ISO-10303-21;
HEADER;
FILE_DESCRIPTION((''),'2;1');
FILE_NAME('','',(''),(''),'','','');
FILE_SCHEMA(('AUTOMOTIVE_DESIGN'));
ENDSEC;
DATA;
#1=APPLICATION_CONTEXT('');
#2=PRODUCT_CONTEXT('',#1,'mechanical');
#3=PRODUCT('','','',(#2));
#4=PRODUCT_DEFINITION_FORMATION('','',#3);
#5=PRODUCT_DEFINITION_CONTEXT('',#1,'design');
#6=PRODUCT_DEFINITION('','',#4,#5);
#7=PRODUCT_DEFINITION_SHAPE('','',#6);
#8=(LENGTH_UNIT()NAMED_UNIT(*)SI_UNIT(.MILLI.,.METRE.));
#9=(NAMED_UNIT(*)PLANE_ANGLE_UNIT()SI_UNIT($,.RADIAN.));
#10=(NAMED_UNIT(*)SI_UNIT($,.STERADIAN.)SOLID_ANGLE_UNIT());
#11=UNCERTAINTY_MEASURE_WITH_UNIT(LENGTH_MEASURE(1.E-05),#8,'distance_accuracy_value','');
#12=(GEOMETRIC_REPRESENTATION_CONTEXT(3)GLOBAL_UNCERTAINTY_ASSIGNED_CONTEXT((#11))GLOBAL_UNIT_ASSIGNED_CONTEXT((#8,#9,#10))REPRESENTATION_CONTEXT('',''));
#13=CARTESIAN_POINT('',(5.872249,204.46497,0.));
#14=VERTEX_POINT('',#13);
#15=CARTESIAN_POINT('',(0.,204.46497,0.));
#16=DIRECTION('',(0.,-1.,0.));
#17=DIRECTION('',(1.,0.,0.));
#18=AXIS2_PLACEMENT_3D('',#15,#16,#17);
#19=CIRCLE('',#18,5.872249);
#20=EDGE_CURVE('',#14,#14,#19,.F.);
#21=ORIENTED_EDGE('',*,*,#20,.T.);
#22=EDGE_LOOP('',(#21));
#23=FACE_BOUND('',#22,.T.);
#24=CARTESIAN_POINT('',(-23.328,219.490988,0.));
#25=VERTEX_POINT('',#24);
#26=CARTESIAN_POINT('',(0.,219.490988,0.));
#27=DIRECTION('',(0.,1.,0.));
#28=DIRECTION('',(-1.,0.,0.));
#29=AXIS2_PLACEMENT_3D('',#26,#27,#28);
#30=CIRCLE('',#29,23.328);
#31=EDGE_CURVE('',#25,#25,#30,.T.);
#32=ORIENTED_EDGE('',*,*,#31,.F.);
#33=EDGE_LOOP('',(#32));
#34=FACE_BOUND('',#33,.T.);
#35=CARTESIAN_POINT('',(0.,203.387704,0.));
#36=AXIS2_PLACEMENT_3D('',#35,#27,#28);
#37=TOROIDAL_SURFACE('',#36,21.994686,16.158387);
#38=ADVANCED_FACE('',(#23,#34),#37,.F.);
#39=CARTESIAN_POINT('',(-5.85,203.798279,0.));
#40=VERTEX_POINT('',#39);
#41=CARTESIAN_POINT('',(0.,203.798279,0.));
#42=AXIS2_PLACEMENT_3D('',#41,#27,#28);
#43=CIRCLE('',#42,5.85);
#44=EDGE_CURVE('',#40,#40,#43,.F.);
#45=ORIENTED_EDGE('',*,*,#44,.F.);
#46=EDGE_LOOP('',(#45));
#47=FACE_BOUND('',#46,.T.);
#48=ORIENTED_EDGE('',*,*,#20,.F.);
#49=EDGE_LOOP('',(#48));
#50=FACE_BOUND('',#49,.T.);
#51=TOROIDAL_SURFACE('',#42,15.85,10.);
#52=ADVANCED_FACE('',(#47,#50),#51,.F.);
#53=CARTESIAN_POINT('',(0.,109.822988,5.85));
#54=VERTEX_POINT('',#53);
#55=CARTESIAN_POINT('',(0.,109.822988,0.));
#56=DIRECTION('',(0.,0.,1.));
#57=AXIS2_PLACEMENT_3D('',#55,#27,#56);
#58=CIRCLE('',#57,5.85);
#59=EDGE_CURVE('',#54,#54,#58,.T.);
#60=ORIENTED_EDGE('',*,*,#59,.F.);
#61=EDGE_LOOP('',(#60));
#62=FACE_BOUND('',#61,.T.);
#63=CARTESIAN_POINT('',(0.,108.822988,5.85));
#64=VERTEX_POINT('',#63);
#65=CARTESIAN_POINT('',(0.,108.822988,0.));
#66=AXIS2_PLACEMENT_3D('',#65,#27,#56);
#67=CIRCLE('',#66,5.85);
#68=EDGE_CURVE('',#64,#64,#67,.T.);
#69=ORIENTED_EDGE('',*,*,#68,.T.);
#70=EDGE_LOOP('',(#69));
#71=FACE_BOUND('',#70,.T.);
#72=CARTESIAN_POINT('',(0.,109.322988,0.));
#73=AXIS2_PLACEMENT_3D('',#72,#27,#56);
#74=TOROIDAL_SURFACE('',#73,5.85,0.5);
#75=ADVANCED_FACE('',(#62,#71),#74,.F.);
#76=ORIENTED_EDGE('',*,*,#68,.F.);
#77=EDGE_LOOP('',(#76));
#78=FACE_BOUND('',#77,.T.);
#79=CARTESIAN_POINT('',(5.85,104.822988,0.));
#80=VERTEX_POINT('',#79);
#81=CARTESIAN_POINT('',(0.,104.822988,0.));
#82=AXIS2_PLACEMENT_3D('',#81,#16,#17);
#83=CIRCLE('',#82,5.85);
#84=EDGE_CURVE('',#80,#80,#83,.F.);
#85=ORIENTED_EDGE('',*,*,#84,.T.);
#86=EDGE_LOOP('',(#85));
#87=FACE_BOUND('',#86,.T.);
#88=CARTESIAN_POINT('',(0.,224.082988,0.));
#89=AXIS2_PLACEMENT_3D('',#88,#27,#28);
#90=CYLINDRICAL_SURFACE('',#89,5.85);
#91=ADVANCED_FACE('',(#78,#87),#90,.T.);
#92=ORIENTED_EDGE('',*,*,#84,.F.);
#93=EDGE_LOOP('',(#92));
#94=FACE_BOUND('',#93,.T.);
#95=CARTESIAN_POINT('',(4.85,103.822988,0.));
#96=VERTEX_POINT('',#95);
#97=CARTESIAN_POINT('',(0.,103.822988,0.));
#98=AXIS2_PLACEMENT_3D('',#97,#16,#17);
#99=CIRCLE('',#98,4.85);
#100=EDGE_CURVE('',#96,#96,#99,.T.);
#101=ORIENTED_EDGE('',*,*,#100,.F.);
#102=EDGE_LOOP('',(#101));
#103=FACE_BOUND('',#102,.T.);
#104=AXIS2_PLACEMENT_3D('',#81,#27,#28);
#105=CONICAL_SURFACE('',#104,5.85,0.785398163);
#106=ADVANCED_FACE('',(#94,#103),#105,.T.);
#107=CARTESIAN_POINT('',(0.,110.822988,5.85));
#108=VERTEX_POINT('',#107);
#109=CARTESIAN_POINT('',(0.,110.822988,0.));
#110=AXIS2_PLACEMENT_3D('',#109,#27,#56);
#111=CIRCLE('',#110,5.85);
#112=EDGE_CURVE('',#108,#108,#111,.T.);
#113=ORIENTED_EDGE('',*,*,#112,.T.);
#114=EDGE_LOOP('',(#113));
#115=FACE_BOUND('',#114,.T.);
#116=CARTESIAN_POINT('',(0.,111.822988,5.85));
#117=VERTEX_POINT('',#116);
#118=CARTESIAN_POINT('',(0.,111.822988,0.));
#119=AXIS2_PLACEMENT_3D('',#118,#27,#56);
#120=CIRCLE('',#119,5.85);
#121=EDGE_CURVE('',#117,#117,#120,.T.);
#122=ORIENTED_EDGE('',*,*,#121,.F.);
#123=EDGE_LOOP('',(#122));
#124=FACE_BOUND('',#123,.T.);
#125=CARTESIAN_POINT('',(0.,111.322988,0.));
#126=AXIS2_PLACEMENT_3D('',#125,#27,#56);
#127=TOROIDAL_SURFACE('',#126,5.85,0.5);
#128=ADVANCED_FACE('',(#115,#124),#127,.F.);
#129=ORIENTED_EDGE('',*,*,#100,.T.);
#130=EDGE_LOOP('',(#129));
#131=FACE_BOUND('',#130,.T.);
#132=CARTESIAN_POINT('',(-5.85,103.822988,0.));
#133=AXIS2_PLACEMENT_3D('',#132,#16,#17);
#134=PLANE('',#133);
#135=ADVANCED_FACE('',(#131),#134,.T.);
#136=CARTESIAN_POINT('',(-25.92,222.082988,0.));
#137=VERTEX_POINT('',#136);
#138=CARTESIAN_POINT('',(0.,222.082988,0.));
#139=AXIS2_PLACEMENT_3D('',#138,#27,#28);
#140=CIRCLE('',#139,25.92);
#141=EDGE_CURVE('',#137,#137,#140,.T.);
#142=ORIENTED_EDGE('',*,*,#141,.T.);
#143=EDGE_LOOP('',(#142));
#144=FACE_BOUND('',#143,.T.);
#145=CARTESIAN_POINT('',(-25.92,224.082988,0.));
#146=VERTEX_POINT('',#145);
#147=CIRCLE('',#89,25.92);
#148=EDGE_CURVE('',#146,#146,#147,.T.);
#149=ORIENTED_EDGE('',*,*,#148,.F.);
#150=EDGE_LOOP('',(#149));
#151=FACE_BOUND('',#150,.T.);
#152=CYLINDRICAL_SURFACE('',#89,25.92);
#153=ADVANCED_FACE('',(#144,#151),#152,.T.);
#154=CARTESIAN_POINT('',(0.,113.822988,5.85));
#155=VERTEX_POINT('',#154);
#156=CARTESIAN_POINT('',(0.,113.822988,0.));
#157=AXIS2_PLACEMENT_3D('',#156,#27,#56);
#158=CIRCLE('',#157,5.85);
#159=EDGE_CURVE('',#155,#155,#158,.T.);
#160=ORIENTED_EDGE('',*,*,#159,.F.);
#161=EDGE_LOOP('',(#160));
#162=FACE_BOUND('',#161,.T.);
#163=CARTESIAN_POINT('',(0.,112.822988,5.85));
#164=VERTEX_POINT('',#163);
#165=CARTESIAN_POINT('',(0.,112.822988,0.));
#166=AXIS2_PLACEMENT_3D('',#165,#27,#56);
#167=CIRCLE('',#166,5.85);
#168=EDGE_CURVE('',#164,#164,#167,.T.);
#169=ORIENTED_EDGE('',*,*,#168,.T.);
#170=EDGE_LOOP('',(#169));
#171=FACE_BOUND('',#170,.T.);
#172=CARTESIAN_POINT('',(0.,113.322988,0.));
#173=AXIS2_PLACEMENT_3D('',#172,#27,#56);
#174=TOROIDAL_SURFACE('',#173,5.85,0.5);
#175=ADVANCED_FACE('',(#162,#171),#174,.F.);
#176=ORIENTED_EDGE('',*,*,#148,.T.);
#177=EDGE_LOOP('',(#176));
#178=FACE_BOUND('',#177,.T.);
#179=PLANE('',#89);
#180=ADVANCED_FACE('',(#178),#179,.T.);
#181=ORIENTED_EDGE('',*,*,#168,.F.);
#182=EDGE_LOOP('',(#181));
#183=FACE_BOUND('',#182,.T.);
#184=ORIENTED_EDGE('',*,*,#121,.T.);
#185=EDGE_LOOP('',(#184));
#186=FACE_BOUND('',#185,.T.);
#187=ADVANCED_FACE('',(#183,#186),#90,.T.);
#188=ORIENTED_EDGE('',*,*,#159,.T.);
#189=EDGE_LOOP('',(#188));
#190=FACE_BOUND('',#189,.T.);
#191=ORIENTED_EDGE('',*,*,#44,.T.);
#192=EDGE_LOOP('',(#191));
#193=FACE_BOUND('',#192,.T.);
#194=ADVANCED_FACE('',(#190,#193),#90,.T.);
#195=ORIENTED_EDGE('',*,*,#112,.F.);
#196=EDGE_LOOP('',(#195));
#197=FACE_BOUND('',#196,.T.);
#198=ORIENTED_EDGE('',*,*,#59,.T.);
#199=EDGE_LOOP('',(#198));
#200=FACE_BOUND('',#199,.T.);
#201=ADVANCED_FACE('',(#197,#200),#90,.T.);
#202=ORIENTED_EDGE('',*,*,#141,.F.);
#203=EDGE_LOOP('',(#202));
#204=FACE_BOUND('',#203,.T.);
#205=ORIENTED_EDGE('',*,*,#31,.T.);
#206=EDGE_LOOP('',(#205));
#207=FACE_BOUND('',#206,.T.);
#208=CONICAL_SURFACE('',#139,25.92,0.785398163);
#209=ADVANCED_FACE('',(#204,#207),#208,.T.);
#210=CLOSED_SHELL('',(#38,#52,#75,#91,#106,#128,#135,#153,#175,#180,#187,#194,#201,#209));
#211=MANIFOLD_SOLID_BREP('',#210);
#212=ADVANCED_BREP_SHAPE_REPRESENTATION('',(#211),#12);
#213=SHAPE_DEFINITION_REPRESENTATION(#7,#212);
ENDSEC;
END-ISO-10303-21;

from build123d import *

# Parameters (mm, degrees)
FILLET1_R     = 10
CHAMFER1_SIZE = 1


with BuildPart() as part:
    # Sketch1 → Revolve1 (revolve)
    with BuildSketch(Plane.XY):
        with BuildLine():
            Line((0, 224.082988103), (-25.92, 224.082988103))
            Line((-25.92, 224.082988103), (-25.92, 222.082988103))
            Line((-25.92, 222.082988103), (-23.328, 219.490988103))
            ThreePointArc((-23.328, 219.490988103), (-11.297623362, 215.498292086), (-5.85, 204.052988103))
            Line((-5.85, 204.052988103), (-5.85, 103.822988103))
            Line((-5.85, 103.822988103), (0, 103.822988103))
            Line((0, 103.822988103), (0, 224.082988103))
        make_face()
    revolve(axis=Axis((0, 224.082988103, 0), (0, -1, 0)))

    # Fillet1
    # the kernel refuses this fillet: 10 mm, written as the material it adds along each edge
    with BuildSketch(Plane(origin=(0, 204.052988103, 0), x_dir=(-1, 0, 0), z_dir=(0, 0, 1))) as fillet1_piece_1:
        with BuildLine():
            CenterArc((15.85, 0.254709409), FILLET1_R, 180, 3.822695193)
            Line((5.85, 0.254709409), (5.85, 0))
            ThreePointArc((5.85, 0), (5.85980933, -0.20606196), (5.872248615, -0.411981893))
        make_face()
    revolve(axis=Axis((0, 204.052988103, 0), (0, -1, 0)))

    # Chamfer1
    chamfer1_edges = [part.edges().sort_by_distance(p)[0] for p in [
        (5.85, 103.822988103, 0),
    ]]
    chamfer(chamfer1_edges, length=CHAMFER1_SIZE)

    # Sketch5 → Cut-Revolve2 (revolve, cut)
    with BuildSketch(Plane(origin=(0, 0, 0), x_dir=(0, 0, -1), z_dir=(1, 0, 0))):
        with BuildLine():
            Line((-7.48, 111.822988103), (-5.85, 111.822988103))
            ThreePointArc((-5.85, 111.822988103), (-5.35, 111.322988103), (-5.85, 110.822988103))
            Line((-5.85, 110.822988103), (-7.48, 110.822988103))
            Line((-7.48, 110.822988103), (-7.48, 111.822988103))
        make_face()
        with BuildLine():
            Line((-7.48, 108.822988103), (-5.85, 108.822988103))
            ThreePointArc((-5.85, 108.822988103), (-5.35, 109.322988103), (-5.85, 109.822988103))
            Line((-5.85, 109.822988103), (-7.48, 109.822988103))
            Line((-7.48, 109.822988103), (-7.48, 108.822988103))
        make_face()
        with BuildLine():
            Line((-7.48, 113.822988103), (-5.85, 113.822988103))
            ThreePointArc((-5.85, 113.822988103), (-5.35, 113.322988103), (-5.85, 112.822988103))
            Line((-5.85, 112.822988103), (-7.48, 112.822988103))
            Line((-7.48, 112.822988103), (-7.48, 113.822988103))
        make_face()
    revolve(axis=Axis((0, 203.798278695, 0), (0, -1, 0)), mode=Mode.SUBTRACT)


solid = part.part
